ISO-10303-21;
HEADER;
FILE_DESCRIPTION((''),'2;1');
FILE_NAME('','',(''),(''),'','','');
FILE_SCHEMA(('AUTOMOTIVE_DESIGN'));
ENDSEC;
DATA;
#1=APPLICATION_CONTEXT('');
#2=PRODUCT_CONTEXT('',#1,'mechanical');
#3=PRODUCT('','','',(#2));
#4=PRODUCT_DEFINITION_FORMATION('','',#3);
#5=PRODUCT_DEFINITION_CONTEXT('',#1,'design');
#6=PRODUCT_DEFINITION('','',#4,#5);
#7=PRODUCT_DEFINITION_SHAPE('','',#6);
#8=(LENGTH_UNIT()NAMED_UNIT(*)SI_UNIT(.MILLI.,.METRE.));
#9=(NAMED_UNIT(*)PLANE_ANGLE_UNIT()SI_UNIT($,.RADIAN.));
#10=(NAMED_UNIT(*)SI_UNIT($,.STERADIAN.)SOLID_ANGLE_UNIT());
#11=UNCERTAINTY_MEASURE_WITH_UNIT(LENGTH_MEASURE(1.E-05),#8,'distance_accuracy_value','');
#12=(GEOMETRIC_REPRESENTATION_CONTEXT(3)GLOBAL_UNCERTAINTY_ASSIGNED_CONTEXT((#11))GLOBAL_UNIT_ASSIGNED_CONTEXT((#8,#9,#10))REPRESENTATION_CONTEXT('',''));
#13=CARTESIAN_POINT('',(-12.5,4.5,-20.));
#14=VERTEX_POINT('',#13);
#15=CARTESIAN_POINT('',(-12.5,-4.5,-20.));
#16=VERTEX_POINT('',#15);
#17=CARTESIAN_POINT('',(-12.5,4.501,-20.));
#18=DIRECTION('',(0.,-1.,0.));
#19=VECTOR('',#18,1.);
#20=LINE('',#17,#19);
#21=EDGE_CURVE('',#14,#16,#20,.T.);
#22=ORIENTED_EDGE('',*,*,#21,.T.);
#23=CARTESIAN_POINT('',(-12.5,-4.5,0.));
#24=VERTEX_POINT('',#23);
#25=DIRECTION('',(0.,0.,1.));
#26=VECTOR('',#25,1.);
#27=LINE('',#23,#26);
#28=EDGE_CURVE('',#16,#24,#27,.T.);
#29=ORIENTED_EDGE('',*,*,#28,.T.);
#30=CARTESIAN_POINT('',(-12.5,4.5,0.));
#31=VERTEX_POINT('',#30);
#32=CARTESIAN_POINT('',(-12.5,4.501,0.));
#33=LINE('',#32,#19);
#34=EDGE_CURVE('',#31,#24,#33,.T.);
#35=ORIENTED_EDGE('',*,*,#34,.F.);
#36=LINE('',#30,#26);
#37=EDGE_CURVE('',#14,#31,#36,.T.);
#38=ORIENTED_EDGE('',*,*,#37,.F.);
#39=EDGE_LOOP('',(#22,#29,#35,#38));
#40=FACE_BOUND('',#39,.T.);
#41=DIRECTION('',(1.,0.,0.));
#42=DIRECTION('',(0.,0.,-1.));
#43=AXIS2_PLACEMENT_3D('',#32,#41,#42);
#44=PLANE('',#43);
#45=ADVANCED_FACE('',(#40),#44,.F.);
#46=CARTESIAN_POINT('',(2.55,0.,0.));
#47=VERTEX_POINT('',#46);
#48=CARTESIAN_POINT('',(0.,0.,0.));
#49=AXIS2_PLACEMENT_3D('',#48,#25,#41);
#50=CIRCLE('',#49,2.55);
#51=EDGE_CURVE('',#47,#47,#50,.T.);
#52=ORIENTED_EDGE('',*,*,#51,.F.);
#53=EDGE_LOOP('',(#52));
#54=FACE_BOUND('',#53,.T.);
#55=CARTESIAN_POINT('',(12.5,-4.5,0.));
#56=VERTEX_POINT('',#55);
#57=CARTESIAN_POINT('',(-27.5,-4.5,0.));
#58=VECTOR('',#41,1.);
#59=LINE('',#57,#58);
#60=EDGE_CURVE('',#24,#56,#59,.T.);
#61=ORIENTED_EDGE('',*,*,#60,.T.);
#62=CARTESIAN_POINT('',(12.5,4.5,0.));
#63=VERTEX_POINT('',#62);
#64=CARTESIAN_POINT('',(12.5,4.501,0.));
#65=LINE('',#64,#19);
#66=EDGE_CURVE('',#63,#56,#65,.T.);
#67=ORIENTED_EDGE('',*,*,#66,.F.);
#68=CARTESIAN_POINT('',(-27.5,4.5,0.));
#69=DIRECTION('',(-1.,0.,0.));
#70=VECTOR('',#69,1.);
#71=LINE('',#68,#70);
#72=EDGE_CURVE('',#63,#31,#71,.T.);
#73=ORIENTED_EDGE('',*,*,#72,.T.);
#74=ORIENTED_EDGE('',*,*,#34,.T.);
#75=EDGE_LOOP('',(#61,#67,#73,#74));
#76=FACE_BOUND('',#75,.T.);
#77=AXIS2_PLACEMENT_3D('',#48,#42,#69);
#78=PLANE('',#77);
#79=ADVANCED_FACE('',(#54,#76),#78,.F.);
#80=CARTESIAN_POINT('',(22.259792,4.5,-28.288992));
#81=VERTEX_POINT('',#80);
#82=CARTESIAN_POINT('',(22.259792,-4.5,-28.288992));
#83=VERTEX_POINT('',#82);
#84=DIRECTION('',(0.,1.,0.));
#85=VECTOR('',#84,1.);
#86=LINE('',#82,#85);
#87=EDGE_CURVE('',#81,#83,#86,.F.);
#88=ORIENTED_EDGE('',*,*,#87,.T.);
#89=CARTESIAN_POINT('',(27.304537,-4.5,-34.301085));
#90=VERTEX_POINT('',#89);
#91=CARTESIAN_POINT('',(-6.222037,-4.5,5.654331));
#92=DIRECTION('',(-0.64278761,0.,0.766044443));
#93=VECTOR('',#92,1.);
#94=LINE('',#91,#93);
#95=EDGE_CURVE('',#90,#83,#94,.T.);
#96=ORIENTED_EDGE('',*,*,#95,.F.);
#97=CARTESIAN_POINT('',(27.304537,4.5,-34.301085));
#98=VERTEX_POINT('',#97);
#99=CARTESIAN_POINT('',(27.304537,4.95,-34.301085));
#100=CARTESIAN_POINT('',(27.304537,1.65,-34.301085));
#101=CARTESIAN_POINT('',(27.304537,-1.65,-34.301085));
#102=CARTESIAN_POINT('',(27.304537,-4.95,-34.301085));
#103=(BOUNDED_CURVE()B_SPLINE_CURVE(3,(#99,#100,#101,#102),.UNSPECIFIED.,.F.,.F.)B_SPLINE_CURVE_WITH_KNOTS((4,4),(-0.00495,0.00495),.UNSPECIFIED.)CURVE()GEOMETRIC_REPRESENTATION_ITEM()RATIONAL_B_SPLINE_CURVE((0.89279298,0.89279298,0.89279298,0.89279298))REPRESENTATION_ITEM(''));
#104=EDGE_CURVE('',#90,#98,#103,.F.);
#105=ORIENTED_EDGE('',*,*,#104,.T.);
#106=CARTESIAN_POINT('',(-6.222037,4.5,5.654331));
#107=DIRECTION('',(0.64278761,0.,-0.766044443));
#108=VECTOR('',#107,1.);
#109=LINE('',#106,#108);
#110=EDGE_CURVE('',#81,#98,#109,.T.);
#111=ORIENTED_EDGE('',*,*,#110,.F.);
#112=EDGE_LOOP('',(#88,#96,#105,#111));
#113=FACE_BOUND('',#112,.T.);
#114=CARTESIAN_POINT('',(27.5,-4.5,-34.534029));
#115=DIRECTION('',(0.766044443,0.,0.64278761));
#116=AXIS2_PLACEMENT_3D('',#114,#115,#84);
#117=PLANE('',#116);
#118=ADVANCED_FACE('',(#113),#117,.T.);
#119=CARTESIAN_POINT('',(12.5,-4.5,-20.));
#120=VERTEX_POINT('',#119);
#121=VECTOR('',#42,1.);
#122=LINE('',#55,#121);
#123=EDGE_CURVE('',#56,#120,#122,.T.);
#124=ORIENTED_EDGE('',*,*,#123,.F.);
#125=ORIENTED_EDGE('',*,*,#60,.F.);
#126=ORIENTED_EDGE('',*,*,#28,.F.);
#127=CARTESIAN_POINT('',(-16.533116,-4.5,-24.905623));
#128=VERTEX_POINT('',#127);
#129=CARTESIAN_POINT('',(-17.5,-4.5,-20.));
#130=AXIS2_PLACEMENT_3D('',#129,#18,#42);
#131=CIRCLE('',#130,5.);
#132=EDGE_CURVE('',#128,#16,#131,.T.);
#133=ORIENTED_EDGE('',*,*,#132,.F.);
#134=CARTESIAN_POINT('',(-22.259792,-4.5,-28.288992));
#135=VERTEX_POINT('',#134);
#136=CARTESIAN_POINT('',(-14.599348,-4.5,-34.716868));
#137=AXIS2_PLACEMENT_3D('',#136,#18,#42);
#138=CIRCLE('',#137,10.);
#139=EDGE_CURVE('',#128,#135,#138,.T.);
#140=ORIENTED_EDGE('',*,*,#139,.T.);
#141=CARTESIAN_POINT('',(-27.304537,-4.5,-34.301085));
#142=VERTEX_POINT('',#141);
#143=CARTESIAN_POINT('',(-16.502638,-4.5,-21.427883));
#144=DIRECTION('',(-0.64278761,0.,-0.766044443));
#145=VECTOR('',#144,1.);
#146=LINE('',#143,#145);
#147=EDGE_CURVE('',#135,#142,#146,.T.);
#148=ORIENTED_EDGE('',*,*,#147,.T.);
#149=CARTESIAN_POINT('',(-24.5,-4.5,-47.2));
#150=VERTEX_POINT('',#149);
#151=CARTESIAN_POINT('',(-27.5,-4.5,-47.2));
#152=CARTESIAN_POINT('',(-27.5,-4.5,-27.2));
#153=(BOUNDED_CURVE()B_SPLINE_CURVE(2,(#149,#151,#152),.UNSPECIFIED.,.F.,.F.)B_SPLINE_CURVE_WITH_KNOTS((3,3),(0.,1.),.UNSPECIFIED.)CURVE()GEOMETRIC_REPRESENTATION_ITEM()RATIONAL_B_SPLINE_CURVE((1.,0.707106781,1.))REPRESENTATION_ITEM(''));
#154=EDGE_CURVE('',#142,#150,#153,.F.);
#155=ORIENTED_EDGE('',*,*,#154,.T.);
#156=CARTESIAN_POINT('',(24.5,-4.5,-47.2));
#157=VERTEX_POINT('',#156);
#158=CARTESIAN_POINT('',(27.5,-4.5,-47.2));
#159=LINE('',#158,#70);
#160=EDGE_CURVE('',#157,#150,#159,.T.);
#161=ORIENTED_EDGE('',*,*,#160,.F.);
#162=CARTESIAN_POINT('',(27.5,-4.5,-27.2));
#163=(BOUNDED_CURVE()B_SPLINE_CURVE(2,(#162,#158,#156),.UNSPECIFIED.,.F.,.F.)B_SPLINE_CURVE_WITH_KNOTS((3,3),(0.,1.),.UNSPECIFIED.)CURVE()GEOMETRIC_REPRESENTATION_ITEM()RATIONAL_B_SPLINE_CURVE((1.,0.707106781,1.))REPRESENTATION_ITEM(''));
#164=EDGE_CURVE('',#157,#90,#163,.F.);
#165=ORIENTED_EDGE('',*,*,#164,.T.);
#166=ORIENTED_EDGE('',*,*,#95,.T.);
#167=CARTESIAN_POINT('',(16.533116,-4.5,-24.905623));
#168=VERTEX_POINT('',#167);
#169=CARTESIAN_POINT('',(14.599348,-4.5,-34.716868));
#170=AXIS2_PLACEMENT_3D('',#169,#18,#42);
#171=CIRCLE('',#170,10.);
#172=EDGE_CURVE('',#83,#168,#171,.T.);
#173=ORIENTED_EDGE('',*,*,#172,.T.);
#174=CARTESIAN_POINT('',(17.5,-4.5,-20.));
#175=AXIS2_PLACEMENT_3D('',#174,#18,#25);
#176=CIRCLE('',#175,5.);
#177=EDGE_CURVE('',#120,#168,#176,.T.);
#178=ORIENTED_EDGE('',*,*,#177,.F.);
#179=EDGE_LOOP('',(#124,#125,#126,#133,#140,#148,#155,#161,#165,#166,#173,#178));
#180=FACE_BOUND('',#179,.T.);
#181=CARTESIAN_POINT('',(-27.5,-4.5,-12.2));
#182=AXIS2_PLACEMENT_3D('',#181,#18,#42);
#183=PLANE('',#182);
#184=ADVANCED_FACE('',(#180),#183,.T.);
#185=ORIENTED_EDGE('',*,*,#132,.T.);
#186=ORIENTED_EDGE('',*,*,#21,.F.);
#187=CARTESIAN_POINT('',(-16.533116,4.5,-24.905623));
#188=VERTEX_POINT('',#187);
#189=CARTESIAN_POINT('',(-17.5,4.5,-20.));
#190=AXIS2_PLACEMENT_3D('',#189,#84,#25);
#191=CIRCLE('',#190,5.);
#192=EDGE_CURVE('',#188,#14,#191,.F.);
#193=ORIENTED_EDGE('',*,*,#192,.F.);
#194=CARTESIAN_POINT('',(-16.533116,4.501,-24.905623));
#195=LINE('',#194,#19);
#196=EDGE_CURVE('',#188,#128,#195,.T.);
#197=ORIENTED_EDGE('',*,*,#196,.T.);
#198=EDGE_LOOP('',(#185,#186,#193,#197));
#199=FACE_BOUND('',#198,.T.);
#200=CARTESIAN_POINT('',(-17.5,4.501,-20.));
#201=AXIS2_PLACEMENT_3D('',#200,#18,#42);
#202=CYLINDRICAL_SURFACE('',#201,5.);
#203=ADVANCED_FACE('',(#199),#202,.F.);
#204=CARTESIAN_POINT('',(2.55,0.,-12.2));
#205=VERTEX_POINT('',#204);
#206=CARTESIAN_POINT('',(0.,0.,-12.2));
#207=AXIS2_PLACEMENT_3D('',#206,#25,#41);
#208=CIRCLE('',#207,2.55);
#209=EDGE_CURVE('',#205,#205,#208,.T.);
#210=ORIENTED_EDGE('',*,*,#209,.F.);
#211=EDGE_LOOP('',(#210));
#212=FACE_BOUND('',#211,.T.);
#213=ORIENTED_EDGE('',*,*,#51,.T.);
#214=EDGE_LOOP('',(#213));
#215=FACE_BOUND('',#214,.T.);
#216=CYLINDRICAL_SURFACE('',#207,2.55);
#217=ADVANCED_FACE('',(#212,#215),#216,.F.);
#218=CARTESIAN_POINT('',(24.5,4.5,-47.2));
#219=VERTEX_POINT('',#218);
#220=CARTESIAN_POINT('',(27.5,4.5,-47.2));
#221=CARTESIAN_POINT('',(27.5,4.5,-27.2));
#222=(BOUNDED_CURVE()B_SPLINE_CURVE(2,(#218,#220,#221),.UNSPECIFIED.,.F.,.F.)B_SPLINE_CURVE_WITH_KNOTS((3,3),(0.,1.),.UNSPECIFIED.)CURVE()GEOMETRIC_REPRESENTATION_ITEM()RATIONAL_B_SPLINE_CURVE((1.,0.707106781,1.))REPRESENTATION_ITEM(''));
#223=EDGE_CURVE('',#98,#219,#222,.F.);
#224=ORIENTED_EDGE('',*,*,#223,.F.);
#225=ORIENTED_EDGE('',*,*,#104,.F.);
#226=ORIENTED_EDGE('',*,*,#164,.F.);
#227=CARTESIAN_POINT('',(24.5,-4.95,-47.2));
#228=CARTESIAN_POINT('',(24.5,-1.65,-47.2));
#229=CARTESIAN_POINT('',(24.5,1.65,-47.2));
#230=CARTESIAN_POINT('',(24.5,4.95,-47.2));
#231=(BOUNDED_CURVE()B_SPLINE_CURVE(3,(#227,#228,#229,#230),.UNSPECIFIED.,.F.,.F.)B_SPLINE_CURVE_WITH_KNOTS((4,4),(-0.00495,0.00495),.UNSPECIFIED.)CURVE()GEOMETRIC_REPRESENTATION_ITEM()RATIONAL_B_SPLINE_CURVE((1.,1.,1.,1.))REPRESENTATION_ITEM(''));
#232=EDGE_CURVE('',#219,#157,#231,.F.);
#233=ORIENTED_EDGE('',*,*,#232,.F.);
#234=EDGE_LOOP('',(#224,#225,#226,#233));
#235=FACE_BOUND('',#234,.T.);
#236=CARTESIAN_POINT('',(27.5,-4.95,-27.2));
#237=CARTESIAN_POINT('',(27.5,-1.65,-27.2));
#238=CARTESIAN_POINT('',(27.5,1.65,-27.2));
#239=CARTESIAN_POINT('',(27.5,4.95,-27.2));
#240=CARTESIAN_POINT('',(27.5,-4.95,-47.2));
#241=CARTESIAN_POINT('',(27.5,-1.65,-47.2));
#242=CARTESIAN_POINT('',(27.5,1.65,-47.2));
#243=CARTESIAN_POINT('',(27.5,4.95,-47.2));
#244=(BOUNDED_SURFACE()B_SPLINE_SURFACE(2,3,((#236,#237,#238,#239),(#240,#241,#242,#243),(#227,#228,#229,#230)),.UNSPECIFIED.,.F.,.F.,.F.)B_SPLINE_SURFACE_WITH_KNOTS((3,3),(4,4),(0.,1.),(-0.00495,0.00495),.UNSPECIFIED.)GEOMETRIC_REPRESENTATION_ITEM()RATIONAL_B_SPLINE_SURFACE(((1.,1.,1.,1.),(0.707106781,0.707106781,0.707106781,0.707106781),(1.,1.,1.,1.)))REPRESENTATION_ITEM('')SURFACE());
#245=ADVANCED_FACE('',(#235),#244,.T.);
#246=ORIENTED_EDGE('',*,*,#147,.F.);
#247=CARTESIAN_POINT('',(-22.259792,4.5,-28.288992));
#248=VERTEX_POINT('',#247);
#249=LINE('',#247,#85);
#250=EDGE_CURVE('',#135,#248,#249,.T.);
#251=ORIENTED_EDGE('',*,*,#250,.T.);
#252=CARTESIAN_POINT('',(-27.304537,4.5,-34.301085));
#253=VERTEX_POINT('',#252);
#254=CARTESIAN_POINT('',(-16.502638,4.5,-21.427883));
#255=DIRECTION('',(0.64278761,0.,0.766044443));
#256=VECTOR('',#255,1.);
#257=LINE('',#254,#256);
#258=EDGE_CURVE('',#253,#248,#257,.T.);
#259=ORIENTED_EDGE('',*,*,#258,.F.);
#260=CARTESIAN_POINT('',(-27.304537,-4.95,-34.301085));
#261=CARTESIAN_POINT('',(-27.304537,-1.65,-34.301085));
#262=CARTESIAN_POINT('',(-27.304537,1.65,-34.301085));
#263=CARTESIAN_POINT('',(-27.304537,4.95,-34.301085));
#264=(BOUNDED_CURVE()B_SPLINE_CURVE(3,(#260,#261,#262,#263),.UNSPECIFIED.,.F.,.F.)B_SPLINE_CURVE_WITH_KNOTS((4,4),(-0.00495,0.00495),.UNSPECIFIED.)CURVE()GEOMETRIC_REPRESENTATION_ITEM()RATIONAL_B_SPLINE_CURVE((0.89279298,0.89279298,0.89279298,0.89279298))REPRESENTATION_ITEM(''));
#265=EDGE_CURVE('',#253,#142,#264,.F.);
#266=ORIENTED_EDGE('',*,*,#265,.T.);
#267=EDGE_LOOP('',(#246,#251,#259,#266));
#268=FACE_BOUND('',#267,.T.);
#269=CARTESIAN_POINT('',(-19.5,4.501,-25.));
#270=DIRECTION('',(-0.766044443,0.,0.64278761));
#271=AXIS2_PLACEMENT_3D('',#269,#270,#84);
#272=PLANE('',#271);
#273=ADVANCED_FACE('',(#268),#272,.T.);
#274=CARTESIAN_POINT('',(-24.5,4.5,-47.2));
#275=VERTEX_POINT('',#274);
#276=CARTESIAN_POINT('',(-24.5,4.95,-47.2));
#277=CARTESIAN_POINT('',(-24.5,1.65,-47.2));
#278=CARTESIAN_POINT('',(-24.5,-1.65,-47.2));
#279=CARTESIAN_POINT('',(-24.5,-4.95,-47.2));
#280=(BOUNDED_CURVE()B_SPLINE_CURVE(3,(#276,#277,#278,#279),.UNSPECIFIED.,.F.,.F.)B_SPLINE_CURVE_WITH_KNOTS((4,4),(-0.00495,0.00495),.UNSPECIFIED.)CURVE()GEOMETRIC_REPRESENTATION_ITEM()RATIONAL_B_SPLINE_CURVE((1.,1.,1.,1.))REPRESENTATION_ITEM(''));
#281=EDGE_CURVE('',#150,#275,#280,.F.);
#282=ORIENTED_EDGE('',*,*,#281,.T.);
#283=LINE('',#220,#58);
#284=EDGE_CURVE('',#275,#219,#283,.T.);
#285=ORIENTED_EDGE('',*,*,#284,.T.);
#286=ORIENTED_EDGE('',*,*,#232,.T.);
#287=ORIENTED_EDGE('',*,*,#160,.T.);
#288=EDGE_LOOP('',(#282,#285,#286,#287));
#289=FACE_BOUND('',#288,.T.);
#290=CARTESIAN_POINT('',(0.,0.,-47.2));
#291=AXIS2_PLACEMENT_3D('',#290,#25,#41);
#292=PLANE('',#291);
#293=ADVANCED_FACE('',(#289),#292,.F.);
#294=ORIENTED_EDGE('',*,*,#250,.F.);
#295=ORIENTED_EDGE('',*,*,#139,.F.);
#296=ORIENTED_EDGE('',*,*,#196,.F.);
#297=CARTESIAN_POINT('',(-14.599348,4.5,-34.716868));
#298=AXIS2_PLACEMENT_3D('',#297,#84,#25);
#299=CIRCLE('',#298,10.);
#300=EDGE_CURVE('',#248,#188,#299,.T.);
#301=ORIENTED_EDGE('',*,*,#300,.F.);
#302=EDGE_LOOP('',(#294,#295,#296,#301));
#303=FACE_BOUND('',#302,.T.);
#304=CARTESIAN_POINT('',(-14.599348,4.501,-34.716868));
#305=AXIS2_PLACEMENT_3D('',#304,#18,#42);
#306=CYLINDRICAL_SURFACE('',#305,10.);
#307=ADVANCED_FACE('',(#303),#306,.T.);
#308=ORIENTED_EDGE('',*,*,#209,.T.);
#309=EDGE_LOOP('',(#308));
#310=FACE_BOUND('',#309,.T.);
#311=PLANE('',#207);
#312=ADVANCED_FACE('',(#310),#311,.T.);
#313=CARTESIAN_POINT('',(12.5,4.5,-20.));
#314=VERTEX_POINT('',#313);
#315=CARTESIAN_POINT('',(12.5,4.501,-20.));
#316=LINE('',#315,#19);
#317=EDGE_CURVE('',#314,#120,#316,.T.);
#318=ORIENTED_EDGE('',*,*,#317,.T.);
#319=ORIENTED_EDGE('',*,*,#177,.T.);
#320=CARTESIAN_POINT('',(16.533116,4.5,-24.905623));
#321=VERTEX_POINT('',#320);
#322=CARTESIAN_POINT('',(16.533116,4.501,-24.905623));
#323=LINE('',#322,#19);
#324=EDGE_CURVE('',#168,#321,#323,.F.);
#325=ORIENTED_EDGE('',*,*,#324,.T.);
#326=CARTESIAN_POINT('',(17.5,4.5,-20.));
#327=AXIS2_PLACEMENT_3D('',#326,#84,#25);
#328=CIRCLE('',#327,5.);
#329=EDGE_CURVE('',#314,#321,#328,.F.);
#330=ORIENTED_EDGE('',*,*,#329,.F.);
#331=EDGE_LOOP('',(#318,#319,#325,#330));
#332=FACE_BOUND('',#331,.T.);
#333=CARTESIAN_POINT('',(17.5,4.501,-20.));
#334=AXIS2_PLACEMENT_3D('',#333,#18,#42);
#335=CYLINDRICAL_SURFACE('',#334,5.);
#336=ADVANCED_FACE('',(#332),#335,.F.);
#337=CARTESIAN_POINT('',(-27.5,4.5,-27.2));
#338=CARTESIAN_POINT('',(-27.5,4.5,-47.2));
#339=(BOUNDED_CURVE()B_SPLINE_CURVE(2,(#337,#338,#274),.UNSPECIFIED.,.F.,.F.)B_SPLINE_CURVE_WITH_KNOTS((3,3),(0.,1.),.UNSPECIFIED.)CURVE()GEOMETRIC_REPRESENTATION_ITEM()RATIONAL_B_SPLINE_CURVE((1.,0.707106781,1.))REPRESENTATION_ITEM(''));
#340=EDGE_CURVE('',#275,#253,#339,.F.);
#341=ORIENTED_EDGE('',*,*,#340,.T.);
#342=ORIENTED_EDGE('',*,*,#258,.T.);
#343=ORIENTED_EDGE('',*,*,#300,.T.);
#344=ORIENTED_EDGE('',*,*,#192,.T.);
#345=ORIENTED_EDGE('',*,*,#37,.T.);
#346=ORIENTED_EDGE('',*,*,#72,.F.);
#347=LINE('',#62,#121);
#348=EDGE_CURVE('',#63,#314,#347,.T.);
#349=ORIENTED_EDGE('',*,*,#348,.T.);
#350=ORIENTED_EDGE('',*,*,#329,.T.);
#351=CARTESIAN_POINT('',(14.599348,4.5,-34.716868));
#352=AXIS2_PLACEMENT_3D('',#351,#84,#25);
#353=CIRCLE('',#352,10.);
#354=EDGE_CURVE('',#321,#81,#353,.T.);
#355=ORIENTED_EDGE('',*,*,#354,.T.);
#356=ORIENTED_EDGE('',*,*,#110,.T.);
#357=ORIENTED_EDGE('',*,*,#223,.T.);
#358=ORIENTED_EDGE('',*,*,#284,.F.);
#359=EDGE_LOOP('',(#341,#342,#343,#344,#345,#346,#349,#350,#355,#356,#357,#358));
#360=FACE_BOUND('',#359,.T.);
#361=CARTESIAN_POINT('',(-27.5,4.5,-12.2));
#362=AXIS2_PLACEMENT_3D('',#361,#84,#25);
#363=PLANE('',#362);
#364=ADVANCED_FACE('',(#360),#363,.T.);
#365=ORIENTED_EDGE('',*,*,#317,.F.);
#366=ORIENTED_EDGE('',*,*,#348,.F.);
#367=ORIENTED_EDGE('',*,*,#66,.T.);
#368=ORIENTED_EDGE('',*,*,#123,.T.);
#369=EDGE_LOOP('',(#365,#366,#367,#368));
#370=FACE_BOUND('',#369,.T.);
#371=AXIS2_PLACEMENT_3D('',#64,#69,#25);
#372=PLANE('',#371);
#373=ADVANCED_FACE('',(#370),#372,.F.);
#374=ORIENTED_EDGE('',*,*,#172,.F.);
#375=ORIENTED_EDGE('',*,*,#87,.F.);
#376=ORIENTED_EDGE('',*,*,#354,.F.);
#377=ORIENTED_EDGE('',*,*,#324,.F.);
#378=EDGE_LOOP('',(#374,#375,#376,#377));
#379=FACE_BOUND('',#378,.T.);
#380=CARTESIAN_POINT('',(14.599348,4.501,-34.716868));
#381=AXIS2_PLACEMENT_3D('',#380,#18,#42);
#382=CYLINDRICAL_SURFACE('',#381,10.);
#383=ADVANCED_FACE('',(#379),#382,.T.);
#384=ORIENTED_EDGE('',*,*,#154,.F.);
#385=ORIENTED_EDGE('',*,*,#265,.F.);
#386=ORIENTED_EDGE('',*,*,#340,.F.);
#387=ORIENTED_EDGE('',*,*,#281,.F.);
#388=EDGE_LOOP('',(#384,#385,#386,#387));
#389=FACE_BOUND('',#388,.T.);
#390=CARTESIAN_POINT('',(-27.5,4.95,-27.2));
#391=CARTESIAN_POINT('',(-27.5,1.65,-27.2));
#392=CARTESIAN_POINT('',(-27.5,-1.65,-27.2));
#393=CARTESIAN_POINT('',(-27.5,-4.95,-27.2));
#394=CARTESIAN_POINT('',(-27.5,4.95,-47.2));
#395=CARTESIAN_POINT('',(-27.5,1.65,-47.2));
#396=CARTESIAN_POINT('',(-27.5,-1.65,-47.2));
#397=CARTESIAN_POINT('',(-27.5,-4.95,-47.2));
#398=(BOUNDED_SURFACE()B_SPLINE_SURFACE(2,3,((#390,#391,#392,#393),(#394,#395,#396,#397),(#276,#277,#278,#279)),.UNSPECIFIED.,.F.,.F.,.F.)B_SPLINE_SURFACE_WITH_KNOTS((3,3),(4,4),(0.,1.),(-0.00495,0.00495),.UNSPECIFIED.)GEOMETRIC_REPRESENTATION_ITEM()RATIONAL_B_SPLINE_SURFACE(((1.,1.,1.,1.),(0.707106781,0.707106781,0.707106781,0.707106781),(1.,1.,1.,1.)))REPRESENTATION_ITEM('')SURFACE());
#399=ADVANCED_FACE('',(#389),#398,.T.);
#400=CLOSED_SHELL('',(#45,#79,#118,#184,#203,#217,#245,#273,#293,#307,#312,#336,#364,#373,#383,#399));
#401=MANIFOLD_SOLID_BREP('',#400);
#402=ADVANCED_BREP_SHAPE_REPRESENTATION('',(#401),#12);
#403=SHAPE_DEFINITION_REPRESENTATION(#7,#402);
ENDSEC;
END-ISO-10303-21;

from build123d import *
from OCP.BRepFilletAPI import BRepFilletAPI_MakeChamfer

# Parameters (mm, degrees)
SKETCH2_W           = 55
SKETCH2_H           = 9
SKETCH2_R           = 2.55
BOSS_EXTRUDE1_DEPTH = 12.2
SKETCH3_W           = 55
SKETCH3_H           = 9
BOSS_EXTRUDE2_DEPTH = 35
CUT_EXTRUDE1_REACH  = 57.363
CHAMFER1_SIZE       = 8
CHAMFER1_SIZE2      = 9.534028741
FILLET1_SIZE        = 20
FILLET1_SIZE_2      = 3
FILLET2_R           = 10


with BuildPart() as part:
    # Sketch2 → Boss-Extrude1 (new body)
    with BuildSketch(Plane.XY):
        Rectangle(SKETCH2_W, SKETCH2_H)
        Circle(SKETCH2_R, mode=Mode.SUBTRACT)
    extrude(amount=-BOSS_EXTRUDE1_DEPTH)

    # Sketch3 → Boss-Extrude2 (add)
    with BuildSketch(Plane(origin=(0, 0, -12.2), x_dir=(-1, 0, 0), z_dir=(0, 0, -1))):
        Rectangle(SKETCH3_W, SKETCH3_H)
    extrude(amount=BOSS_EXTRUDE2_DEPTH)

    # Sketch5 → Cut-Extrude1 (cut, up to next)
    with BuildSketch(Plane.XZ.offset(4.5), mode=Mode.PRIVATE) as cut_extrude1_sk1:
        with BuildLine():
            Line((27.5, 0), (12.5, 0))
            Line((12.5, 0), (12.5, -20))
            ThreePointArc((12.5, -20), (13.964466094, -23.535533906), (17.5, -25))
            Line((17.5, -25), (27.5, -25))
            Line((27.5, -25), (27.5, 0))
        make_face()
    cut_extrude1_tool1 = extrude(cut_extrude1_sk1.sketch, amount=-CUT_EXTRUDE1_REACH, mode=Mode.PRIVATE) & part.part
    # Sketch5 → Cut-Extrude1 (cut, up to next)
    with BuildSketch(Plane.XZ.offset(4.5), mode=Mode.PRIVATE) as cut_extrude1_sk2:
        with BuildLine():
            Line((-12.5, 0), (-12.5, -20))
            ThreePointArc((-12.5, -20), (-13.964466094, -23.535533906), (-17.5, -25))
            Line((-17.5, -25), (-27.5, -25))
            Line((-27.5, -25), (-27.5, 0))
            Line((-27.5, 0), (-12.5, 0))
        make_face()
    cut_extrude1_tool2 = extrude(cut_extrude1_sk2.sketch, amount=-CUT_EXTRUDE1_REACH, mode=Mode.PRIVATE) & part.part
    add(cut_extrude1_tool1.solids().sort_by_distance((20.092648, -4.5, -12.33478))[0], mode=Mode.SUBTRACT)
    add(cut_extrude1_tool2.solids().sort_by_distance((-20.092648, -4.5, -12.33478))[0], mode=Mode.SUBTRACT)

    # Chamfer1: one chamfer whose edges measure the first distance from different faces: ONE call of the kernel's chamfer builder (chamfer() names one face for all edges)
    chamfer1_edges_1 = [part.edges().sort_by_distance(p)[0] for p in [
        (27.5, 0, -25),
    ]]
    chamfer1_side_1 = [part.faces().sort_by_distance(p)[0] for p in [
        (22.5, 0, -25),
    ]]
    chamfer1_edges_2 = [part.edges().sort_by_distance(p)[0] for p in [
        (-27.5, 0, -25),
    ]]
    chamfer1_side_2 = [part.faces().sort_by_distance(p)[0] for p in [
        (-22.5, 0, -25),
    ]]
    chamfer1 = BRepFilletAPI_MakeChamfer(part.part.solid().wrapped)
    for e in chamfer1_edges_1:
        chamfer1.Add(CHAMFER1_SIZE, CHAMFER1_SIZE2, e.wrapped, chamfer1_side_1[0].wrapped)  # the first distance lies on this face
    for e in chamfer1_edges_2:
        chamfer1.Add(CHAMFER1_SIZE, CHAMFER1_SIZE2, e.wrapped, chamfer1_side_2[0].wrapped)  # the first distance lies on this face
    add(Compound.cast(chamfer1.Shape()), mode=Mode.REPLACE)

    # Fillet1
    # an asymmetric fillet: 20, 3 mm, written as the material it takes off along each edge
    with BuildSketch(Plane(origin=(-27.5, -54.5, -47.2), x_dir=(0, 0, 1), z_dir=(0, 1, 0))) as fillet1_piece_1:
        with BuildLine():
            Bezier((FILLET1_SIZE, 0), (0, 0), (0, FILLET1_SIZE_2), weights=[1, 0.707106781, 1])
            Line((0, FILLET1_SIZE_2), (0, 0))
            Line((0, 0), (FILLET1_SIZE, 0))
        make_face()
    extrude(amount=109, mode=Mode.SUBTRACT)
    with BuildSketch(Plane(origin=(27.5, 54.5, -47.2), x_dir=(-1, 0, 0), z_dir=(0, -1, 0))) as fillet1_piece_2:
        with BuildLine():
            Bezier((FILLET1_SIZE_2, 0), (0, 0), (0, -FILLET1_SIZE), weights=[1, 0.707106781, 1])
            Line((0, -FILLET1_SIZE), (0, 0))
            Line((0, 0), (FILLET1_SIZE_2, 0))
        make_face()
    extrude(amount=109, mode=Mode.SUBTRACT)

    # Fillet2
    fillet2_edges = [part.edges().sort_by_distance(p)[0] for p in [
        (19.5, 0, -25),
        (-19.5, 0, -25),
    ]]
    fillet(fillet2_edges, radius=FILLET2_R)


solid = part.part
